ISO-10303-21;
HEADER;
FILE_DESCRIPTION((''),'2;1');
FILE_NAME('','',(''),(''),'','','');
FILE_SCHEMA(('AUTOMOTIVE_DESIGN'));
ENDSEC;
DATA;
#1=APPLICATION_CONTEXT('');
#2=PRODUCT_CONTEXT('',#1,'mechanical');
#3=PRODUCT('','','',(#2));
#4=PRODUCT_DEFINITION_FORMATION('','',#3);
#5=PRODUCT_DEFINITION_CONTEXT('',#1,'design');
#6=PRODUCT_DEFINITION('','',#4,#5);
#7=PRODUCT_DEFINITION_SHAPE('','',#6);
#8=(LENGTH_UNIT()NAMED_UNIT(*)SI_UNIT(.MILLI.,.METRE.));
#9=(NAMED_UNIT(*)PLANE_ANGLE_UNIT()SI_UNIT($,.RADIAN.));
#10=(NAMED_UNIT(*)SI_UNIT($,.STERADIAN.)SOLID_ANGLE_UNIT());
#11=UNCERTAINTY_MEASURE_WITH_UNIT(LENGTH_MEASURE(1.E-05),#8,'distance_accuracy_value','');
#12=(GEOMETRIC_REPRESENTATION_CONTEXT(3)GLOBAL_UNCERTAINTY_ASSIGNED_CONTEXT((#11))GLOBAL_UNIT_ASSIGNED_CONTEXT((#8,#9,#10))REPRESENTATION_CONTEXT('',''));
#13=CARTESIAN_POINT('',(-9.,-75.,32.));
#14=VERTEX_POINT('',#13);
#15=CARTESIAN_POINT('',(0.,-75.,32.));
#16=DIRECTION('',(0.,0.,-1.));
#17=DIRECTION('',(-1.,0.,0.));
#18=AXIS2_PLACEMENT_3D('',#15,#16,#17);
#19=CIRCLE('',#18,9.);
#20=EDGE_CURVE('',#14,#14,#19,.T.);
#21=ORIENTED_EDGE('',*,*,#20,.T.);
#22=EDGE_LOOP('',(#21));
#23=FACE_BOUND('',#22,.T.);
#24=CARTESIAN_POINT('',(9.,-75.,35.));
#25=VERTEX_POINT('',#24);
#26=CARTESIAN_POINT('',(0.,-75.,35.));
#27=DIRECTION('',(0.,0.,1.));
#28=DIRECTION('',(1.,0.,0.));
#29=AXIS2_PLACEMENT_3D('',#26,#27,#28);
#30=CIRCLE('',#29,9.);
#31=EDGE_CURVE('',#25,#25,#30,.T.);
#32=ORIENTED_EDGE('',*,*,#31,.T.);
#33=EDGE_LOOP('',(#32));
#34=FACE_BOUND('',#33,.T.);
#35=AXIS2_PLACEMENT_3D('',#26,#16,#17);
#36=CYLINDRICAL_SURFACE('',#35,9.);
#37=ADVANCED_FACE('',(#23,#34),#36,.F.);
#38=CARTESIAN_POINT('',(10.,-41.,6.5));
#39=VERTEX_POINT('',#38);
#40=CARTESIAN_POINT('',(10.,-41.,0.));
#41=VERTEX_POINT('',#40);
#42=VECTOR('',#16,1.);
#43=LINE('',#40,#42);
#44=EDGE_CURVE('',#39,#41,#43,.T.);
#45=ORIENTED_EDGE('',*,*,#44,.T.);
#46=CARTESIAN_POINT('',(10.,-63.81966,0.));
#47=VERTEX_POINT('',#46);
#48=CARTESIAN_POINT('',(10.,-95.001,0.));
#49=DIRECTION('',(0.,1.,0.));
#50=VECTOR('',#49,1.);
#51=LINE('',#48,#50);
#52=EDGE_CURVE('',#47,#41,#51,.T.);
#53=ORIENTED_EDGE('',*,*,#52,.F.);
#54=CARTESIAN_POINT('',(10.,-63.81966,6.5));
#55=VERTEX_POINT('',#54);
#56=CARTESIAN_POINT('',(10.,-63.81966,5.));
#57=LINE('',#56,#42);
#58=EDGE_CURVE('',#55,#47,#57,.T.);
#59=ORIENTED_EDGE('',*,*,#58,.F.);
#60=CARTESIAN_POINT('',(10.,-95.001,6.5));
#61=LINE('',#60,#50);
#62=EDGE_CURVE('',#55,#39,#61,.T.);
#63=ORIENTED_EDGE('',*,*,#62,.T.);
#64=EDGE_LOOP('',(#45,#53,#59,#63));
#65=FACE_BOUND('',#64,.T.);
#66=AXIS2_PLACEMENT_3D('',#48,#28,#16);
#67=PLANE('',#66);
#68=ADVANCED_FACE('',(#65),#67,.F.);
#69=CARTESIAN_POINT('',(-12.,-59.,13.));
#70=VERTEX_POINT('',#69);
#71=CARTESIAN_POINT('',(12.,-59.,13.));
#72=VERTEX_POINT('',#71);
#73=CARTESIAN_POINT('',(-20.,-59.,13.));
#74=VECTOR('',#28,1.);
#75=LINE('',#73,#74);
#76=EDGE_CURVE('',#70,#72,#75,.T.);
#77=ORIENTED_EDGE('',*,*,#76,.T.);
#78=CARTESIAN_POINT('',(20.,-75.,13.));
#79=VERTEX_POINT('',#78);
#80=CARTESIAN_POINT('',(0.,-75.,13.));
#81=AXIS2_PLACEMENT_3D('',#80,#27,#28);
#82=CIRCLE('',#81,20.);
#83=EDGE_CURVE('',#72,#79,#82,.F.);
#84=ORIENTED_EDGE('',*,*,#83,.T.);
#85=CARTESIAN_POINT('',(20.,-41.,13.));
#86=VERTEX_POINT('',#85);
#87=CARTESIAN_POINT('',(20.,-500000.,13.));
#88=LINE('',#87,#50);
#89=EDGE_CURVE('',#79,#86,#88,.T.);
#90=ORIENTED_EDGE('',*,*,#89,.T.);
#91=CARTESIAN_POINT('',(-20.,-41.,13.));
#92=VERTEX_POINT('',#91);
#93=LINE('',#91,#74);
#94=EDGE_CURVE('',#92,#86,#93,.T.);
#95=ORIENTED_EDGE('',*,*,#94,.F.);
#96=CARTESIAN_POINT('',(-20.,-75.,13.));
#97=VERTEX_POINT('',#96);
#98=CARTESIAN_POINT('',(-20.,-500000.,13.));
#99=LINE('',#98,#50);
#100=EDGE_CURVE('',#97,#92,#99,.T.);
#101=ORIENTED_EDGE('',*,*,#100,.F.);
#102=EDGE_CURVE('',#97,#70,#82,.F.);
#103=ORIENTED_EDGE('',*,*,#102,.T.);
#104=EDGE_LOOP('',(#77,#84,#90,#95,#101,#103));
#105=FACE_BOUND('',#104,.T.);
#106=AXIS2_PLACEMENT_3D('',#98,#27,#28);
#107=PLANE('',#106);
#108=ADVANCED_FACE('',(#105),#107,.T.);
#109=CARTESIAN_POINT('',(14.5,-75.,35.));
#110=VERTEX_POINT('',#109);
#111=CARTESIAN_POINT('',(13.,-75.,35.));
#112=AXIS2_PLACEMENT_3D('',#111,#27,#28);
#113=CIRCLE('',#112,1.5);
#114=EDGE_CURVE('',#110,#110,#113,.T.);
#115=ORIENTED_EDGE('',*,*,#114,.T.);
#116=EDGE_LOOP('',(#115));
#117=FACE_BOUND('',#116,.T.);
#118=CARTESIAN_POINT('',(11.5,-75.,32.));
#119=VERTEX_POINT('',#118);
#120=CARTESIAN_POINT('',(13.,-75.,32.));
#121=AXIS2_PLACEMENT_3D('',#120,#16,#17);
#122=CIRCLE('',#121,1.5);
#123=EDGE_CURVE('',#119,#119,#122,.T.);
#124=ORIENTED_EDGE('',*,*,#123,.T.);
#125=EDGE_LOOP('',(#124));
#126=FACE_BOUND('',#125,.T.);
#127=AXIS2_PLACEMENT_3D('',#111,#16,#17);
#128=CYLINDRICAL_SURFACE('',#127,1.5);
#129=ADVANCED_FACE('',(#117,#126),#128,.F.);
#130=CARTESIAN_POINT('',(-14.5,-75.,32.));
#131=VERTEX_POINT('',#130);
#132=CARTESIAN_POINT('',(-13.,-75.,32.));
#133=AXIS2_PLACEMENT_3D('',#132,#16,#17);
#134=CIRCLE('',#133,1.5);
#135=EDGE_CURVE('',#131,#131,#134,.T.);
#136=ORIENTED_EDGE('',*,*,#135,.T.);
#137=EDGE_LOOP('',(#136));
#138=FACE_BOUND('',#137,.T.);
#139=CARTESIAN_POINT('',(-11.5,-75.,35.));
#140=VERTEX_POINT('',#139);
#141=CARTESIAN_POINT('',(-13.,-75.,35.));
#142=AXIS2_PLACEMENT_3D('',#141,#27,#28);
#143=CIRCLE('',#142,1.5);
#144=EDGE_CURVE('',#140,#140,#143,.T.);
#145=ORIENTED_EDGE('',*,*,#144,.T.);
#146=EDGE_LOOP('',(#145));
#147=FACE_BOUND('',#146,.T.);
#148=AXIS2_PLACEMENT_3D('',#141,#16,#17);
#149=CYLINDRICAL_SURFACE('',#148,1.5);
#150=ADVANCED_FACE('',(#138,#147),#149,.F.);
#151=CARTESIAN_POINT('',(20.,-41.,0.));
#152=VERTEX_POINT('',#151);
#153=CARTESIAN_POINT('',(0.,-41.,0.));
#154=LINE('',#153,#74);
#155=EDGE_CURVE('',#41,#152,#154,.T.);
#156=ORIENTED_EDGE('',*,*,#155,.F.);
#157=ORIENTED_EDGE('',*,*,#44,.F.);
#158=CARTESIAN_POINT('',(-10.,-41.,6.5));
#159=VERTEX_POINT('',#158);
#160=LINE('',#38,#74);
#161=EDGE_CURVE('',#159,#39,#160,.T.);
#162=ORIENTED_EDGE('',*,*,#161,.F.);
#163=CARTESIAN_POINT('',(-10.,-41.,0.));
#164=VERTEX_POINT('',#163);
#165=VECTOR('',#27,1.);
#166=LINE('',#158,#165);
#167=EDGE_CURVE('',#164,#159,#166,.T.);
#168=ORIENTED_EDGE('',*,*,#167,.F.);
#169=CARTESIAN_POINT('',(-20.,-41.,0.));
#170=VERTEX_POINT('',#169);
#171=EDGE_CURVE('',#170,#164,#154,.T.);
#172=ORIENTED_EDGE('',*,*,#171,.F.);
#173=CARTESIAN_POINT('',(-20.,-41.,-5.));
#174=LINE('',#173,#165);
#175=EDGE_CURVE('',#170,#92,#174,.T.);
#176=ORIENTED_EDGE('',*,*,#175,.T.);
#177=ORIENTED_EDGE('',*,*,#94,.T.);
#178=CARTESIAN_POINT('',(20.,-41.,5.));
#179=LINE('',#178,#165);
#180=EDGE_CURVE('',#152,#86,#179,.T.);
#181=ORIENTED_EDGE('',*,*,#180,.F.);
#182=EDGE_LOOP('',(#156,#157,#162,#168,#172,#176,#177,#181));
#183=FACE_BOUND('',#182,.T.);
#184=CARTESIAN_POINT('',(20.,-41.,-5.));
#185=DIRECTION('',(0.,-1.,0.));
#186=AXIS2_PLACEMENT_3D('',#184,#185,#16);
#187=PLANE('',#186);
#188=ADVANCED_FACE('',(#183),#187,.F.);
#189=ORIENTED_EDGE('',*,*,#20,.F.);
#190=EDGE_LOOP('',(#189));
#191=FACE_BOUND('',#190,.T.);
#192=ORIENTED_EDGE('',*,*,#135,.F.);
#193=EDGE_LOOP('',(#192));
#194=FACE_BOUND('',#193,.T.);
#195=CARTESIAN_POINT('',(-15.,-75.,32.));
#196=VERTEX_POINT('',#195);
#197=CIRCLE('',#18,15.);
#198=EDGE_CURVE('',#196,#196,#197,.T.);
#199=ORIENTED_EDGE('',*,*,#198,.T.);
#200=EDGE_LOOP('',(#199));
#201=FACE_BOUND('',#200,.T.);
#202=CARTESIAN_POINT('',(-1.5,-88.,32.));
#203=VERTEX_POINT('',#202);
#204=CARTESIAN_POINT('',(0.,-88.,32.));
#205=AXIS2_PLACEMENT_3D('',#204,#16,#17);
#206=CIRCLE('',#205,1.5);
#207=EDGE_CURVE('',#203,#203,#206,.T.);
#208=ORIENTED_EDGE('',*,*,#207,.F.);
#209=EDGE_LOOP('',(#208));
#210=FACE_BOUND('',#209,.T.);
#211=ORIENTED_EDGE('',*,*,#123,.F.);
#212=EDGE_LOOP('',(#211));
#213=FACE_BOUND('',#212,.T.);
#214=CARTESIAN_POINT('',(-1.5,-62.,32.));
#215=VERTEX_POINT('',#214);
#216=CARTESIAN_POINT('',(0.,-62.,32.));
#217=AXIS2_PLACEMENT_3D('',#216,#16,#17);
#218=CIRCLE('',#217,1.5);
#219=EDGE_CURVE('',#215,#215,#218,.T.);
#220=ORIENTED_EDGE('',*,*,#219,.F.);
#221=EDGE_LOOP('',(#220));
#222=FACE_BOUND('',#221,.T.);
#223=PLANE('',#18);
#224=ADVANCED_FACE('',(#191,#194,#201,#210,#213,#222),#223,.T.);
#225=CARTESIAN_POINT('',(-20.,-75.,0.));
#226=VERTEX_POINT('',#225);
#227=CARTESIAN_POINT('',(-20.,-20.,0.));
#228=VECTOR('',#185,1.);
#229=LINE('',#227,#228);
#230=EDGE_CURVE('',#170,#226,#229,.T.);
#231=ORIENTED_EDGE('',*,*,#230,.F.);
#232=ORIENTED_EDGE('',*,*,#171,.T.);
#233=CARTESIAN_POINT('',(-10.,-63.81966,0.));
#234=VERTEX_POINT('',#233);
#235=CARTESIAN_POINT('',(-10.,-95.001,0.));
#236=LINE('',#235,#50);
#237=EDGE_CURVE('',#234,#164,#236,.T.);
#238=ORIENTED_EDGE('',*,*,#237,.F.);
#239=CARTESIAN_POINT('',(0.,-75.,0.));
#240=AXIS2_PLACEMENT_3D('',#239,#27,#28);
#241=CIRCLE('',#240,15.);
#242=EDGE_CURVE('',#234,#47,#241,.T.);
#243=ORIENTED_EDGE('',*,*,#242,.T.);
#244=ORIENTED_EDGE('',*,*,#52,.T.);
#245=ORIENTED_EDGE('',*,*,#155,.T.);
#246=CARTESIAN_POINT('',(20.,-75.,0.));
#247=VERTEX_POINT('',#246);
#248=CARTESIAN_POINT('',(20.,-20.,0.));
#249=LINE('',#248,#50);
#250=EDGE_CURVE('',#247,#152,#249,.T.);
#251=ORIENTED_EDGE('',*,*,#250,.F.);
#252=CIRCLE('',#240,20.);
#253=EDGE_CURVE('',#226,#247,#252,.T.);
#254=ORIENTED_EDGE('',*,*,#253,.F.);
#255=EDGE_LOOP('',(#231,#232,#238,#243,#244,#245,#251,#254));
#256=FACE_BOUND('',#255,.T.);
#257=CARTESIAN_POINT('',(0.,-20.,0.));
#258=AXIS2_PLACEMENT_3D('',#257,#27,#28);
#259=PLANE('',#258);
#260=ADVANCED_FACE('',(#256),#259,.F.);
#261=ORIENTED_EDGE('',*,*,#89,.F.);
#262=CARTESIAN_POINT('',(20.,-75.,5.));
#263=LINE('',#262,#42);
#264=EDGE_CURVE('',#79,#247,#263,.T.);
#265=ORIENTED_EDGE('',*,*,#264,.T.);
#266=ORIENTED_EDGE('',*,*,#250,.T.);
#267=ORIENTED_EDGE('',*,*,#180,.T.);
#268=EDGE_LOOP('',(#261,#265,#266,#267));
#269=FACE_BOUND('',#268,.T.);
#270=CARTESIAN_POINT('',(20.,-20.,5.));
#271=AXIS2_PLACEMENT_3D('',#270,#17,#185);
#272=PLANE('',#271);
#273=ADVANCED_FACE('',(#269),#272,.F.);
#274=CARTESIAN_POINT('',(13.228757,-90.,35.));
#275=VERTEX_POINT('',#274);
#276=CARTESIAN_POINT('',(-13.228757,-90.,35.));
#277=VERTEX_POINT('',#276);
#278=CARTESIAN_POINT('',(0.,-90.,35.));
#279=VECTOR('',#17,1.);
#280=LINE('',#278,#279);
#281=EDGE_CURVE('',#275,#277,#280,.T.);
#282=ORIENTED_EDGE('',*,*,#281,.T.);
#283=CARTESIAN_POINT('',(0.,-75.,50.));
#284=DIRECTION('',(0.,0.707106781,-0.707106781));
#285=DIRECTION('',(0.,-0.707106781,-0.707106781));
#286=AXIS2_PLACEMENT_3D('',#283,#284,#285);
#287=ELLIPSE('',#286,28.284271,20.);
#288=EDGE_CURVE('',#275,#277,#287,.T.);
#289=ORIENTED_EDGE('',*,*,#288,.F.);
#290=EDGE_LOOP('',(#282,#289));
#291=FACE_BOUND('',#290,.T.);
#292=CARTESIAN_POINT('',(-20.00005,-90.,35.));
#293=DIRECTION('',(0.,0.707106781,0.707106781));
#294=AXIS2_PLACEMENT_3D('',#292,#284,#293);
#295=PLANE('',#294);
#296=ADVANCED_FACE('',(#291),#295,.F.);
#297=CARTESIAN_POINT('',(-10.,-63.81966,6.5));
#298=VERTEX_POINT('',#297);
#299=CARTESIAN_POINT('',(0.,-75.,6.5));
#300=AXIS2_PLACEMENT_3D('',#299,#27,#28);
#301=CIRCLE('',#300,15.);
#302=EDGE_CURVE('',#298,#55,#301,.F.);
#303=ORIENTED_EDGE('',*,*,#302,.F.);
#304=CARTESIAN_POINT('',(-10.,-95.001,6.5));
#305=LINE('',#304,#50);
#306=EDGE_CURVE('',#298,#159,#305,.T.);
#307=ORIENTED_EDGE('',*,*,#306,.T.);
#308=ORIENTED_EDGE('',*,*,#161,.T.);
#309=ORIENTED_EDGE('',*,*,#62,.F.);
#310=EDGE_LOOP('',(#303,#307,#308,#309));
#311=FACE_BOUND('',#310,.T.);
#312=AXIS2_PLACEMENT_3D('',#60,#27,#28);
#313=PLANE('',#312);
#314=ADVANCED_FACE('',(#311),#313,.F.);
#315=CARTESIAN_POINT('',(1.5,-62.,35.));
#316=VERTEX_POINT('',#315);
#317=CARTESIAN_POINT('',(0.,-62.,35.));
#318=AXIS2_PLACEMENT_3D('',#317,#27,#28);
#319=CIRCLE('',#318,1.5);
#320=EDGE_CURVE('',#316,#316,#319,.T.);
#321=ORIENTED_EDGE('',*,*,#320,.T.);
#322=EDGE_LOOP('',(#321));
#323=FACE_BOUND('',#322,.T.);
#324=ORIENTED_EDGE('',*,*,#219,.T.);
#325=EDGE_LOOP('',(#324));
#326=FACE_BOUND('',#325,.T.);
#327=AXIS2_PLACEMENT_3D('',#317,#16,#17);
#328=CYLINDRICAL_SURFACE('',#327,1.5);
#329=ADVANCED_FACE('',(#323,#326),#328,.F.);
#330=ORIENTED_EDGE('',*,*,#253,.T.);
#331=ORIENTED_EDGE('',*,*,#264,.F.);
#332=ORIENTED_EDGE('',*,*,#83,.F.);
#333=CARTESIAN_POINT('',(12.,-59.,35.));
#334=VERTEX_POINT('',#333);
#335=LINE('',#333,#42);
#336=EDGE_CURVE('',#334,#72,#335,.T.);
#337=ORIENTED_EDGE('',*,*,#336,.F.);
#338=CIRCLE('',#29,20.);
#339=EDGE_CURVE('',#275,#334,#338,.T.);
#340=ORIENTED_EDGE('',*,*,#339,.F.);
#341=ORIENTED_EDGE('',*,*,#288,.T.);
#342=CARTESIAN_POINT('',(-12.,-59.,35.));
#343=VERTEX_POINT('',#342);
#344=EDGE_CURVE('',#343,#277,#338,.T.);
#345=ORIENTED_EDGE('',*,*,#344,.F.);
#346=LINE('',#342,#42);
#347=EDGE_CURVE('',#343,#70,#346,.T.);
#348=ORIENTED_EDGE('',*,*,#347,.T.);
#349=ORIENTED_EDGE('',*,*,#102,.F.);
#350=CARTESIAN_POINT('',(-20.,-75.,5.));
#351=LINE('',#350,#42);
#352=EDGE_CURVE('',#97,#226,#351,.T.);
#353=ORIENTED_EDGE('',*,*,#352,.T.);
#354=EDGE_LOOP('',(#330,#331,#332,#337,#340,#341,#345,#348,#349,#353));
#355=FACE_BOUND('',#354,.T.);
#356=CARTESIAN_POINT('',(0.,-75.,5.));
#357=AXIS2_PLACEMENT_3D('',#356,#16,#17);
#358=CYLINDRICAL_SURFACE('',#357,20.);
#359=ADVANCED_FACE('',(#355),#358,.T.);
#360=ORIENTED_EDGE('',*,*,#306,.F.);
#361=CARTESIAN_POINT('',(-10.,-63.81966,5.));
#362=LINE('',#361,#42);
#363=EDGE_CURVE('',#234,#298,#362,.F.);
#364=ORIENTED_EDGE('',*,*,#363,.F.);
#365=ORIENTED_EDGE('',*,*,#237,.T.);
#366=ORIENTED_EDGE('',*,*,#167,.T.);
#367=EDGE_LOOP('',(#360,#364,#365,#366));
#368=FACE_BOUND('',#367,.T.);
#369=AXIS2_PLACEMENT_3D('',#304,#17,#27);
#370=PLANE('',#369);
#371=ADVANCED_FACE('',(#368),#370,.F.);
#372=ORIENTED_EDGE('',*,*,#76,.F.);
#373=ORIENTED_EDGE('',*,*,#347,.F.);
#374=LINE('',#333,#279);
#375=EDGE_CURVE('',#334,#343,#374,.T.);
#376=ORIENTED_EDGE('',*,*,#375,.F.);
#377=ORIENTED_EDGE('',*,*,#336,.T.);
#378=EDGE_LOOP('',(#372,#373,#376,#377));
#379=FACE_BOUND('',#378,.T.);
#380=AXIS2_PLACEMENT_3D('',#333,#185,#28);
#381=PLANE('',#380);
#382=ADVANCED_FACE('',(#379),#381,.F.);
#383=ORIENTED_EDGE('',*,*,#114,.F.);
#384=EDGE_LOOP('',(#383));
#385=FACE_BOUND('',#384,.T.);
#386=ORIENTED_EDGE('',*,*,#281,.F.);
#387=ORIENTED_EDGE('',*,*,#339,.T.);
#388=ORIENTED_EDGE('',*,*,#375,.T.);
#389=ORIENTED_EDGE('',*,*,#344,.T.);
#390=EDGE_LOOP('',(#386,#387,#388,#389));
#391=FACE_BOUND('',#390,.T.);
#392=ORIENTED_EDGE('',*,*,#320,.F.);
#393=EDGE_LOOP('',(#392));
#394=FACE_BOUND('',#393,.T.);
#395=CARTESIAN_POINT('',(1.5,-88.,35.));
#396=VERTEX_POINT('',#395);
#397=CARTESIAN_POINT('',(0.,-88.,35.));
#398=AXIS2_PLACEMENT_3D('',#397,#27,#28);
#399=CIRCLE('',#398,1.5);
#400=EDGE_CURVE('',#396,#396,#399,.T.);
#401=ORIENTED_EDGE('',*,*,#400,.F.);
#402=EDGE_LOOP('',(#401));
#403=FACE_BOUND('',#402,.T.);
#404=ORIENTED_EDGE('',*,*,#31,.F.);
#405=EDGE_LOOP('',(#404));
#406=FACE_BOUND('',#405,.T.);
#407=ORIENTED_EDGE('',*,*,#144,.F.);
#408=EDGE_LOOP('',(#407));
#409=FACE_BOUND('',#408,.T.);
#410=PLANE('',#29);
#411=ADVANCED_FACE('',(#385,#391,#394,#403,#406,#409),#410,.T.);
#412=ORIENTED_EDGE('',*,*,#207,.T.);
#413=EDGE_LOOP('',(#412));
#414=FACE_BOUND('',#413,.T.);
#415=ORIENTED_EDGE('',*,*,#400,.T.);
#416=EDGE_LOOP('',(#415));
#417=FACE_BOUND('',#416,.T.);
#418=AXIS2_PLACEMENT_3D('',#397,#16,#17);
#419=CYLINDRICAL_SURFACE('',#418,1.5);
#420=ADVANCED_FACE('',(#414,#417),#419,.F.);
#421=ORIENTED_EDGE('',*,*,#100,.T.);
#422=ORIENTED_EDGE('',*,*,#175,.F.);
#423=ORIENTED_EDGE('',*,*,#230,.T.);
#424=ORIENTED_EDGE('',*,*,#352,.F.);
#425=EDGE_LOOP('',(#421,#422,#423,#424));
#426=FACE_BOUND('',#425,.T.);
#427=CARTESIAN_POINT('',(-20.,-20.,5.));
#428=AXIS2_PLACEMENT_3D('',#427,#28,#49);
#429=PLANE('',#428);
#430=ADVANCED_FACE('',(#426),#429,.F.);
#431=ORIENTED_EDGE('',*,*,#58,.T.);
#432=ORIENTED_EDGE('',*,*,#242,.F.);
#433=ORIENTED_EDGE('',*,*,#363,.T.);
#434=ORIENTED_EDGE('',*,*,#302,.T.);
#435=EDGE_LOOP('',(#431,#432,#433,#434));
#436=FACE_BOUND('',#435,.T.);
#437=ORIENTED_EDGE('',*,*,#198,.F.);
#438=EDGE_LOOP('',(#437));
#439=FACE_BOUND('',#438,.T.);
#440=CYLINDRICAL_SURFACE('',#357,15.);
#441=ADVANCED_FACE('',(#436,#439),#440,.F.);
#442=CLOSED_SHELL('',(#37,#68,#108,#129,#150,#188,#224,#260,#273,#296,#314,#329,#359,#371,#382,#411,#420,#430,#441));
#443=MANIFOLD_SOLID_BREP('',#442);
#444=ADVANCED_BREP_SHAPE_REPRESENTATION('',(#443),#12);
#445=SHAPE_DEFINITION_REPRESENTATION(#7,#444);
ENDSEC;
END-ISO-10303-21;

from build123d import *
from build123d.topology import SkipClean

# Parameters (mm, degrees)
ESQUISSE1_R           = 15
ESQUISSE1_R_2         = 5
ESQUISSE1_R_3         = 2
EXTRUSION1_DEPTH      = 5
ESQUISSE2_R           = 9
ESQUISSE2_R_2         = 1.5
EXTRUSION2_DEPTH      = 30
ESQUISSE3_R           = 15
EXTRUSION3_DEPTH      = 27
EXTRUSION4_DEPTH      = 104.198837203
EXTRUSION4_DEPTH_BACK = 104.198837203
EXTRUSION5_START      = -10
EXTRUSION5_DEPTH      = 10
EXTRUSION6_START      = 5
EXTRUSION6_DEPTH      = 8
EXTRUSION7_REACH      = 69.387
EXTRUSION7_END_RADIUS = 15
ESQUISSE7_W           = 20
ESQUISSE7_H           = 6.5


# Read off the part's stored shape, not the designer's step: Extrusion6
with BuildPart() as part:
    # Esquisse1 → Extrusion1 (new body)
    with BuildSketch(Plane.XY):
        with BuildLine():
            Line((20, -20), (20, -75))
            ThreePointArc((20, -75), (0, -95), (-20, -75))
            Line((-20, -75), (-20, -20))
            ThreePointArc((-20, -20), (0, 0), (20, -20))
        make_face()
        with Locations((0, -75)):
            Circle(ESQUISSE1_R, mode=Mode.SUBTRACT)
        with Locations((0, -20)):
            Circle(ESQUISSE1_R_2, mode=Mode.SUBTRACT)
        with Locations((-14, -20)):
            Circle(ESQUISSE1_R_3, mode=Mode.SUBTRACT)
        with Locations((-9.899494937, -10.100505063)):
            Circle(ESQUISSE1_R_3, mode=Mode.SUBTRACT)
        with Locations((0, -6)):
            Circle(ESQUISSE1_R_3, mode=Mode.SUBTRACT)
        with Locations((9.899494937, -10.100505063)):
            Circle(ESQUISSE1_R_3, mode=Mode.SUBTRACT)
        with Locations((14, -20)):
            Circle(ESQUISSE1_R_3, mode=Mode.SUBTRACT)
        with Locations((9.899494937, -29.899494937)):
            Circle(ESQUISSE1_R_3, mode=Mode.SUBTRACT)
        with Locations((0, -34)):
            Circle(ESQUISSE1_R_3, mode=Mode.SUBTRACT)
        with Locations((-9.899494937, -29.899494937)):
            Circle(ESQUISSE1_R_3, mode=Mode.SUBTRACT)
    extrude(amount=EXTRUSION1_DEPTH)

    # Esquisse2 → Extrusion2 (add)
    with SkipClean():  # the faces are left unmerged after this step: merging them gives an invalid solid
        with BuildSketch(Plane.XY.offset(5)):
            with BuildLine():
                Line((12, -59), (-12, -59))
                ThreePointArc((-12, -59), (0, -95), (12, -59))
            make_face()
            with Locations((0, -75)):
                Circle(ESQUISSE2_R, mode=Mode.SUBTRACT)
            with Locations((0, -62)):
                Circle(ESQUISSE2_R_2, mode=Mode.SUBTRACT)
            with Locations((0, -88)):
                Circle(ESQUISSE2_R_2, mode=Mode.SUBTRACT)
            with Locations((-13, -75)):
                Circle(ESQUISSE2_R_2, mode=Mode.SUBTRACT)
            with Locations((13, -75)):
                Circle(ESQUISSE2_R_2, mode=Mode.SUBTRACT)
        extrude(amount=EXTRUSION2_DEPTH)

    # Esquisse3 → Extrusion3 (cut)
    with SkipClean():  # the faces are left unmerged after this step: merging them gives an invalid solid
        with BuildSketch(Plane(origin=(0, 0, 5), x_dir=(-1, 0, 0), z_dir=(0, 0, -1))):
            with Locations((0, -75)):
                Circle(ESQUISSE3_R)
        extrude(amount=-EXTRUSION3_DEPTH, mode=Mode.SUBTRACT)

    # Esquisse4 → Extrusion4 (cut, two sides: drawn at the far end of the back side and taken through both)
    with SkipClean():  # the faces are left unmerged after this step: merging them gives an invalid solid
        with BuildSketch(Plane(origin=(0, 0, 0), x_dir=(0, 0, -1), z_dir=(1, 0, 0)).offset(-EXTRUSION4_DEPTH_BACK)):
            Polygon((-35, -95), (-30, -95), (-35, -90), align=None)
        extrude(amount=EXTRUSION4_DEPTH + EXTRUSION4_DEPTH_BACK, mode=Mode.SUBTRACT)

    # Esquisse5 → Extrusion5 (cut)
    with SkipClean():  # the faces are left unmerged after this step: merging them gives an invalid solid
        with BuildSketch(Plane.XY.offset(5).offset(EXTRUSION5_START)):
            with BuildLine():
                Line((20, -41), (-20, -41))
                Line((-20, -41), (-20, -20))
                ThreePointArc((-20, -20), (0, 0), (20, -20))
                Line((20, -20), (20, -41))
            make_face()
        extrude(amount=EXTRUSION5_DEPTH, mode=Mode.SUBTRACT)

    # Extrusion6 outline → Extrusion6 (add)
    with SkipClean():  # the faces are left unmerged after this step: merging them gives an invalid solid
        with BuildSketch(Plane.XY.offset(EXTRUSION6_START)):
            with BuildLine():
                Line((-20, -41), (-20, -75))
                ThreePointArc((-20, -75), (-17.88854382, -66.05572809), (-12, -59))
                Line((-12, -59), (12, -59))
                ThreePointArc((12, -59), (17.88854382, -66.05572809), (20, -75))
                Line((20, -75), (20, -41))
                Line((20, -41), (-20, -41))
            make_face()
        extrude(amount=EXTRUSION6_DEPTH)

    # Extrusion7: up to this cylinder (the profile starts outside it)
    with SkipClean():  # the faces are left unmerged after this step: merging them gives an invalid solid
        extrusion7_end = Plane(origin=(0, -75, 3.25), z_dir=(0, 0, -1)) * Cylinder(EXTRUSION7_END_RADIUS, 169.774, mode=Mode.PRIVATE)
        # Esquisse7 → Extrusion7 (cut, up to the surface)
        with BuildSketch(Plane(origin=(0, -41, 0), x_dir=(1, 0, 0), z_dir=(0, 1, 0)), mode=Mode.PRIVATE) as extrusion7_sk1:
            with Locations((0, -3.25)):
                Rectangle(ESQUISSE7_W, ESQUISSE7_H)
        extrusion7_tool1 = extrude(extrusion7_sk1.sketch, amount=-EXTRUSION7_REACH, mode=Mode.PRIVATE) - extrusion7_end
        add(extrusion7_tool1.solids().sort_by_distance((0, -41, 3.25))[0], mode=Mode.SUBTRACT)


solid = part.part
